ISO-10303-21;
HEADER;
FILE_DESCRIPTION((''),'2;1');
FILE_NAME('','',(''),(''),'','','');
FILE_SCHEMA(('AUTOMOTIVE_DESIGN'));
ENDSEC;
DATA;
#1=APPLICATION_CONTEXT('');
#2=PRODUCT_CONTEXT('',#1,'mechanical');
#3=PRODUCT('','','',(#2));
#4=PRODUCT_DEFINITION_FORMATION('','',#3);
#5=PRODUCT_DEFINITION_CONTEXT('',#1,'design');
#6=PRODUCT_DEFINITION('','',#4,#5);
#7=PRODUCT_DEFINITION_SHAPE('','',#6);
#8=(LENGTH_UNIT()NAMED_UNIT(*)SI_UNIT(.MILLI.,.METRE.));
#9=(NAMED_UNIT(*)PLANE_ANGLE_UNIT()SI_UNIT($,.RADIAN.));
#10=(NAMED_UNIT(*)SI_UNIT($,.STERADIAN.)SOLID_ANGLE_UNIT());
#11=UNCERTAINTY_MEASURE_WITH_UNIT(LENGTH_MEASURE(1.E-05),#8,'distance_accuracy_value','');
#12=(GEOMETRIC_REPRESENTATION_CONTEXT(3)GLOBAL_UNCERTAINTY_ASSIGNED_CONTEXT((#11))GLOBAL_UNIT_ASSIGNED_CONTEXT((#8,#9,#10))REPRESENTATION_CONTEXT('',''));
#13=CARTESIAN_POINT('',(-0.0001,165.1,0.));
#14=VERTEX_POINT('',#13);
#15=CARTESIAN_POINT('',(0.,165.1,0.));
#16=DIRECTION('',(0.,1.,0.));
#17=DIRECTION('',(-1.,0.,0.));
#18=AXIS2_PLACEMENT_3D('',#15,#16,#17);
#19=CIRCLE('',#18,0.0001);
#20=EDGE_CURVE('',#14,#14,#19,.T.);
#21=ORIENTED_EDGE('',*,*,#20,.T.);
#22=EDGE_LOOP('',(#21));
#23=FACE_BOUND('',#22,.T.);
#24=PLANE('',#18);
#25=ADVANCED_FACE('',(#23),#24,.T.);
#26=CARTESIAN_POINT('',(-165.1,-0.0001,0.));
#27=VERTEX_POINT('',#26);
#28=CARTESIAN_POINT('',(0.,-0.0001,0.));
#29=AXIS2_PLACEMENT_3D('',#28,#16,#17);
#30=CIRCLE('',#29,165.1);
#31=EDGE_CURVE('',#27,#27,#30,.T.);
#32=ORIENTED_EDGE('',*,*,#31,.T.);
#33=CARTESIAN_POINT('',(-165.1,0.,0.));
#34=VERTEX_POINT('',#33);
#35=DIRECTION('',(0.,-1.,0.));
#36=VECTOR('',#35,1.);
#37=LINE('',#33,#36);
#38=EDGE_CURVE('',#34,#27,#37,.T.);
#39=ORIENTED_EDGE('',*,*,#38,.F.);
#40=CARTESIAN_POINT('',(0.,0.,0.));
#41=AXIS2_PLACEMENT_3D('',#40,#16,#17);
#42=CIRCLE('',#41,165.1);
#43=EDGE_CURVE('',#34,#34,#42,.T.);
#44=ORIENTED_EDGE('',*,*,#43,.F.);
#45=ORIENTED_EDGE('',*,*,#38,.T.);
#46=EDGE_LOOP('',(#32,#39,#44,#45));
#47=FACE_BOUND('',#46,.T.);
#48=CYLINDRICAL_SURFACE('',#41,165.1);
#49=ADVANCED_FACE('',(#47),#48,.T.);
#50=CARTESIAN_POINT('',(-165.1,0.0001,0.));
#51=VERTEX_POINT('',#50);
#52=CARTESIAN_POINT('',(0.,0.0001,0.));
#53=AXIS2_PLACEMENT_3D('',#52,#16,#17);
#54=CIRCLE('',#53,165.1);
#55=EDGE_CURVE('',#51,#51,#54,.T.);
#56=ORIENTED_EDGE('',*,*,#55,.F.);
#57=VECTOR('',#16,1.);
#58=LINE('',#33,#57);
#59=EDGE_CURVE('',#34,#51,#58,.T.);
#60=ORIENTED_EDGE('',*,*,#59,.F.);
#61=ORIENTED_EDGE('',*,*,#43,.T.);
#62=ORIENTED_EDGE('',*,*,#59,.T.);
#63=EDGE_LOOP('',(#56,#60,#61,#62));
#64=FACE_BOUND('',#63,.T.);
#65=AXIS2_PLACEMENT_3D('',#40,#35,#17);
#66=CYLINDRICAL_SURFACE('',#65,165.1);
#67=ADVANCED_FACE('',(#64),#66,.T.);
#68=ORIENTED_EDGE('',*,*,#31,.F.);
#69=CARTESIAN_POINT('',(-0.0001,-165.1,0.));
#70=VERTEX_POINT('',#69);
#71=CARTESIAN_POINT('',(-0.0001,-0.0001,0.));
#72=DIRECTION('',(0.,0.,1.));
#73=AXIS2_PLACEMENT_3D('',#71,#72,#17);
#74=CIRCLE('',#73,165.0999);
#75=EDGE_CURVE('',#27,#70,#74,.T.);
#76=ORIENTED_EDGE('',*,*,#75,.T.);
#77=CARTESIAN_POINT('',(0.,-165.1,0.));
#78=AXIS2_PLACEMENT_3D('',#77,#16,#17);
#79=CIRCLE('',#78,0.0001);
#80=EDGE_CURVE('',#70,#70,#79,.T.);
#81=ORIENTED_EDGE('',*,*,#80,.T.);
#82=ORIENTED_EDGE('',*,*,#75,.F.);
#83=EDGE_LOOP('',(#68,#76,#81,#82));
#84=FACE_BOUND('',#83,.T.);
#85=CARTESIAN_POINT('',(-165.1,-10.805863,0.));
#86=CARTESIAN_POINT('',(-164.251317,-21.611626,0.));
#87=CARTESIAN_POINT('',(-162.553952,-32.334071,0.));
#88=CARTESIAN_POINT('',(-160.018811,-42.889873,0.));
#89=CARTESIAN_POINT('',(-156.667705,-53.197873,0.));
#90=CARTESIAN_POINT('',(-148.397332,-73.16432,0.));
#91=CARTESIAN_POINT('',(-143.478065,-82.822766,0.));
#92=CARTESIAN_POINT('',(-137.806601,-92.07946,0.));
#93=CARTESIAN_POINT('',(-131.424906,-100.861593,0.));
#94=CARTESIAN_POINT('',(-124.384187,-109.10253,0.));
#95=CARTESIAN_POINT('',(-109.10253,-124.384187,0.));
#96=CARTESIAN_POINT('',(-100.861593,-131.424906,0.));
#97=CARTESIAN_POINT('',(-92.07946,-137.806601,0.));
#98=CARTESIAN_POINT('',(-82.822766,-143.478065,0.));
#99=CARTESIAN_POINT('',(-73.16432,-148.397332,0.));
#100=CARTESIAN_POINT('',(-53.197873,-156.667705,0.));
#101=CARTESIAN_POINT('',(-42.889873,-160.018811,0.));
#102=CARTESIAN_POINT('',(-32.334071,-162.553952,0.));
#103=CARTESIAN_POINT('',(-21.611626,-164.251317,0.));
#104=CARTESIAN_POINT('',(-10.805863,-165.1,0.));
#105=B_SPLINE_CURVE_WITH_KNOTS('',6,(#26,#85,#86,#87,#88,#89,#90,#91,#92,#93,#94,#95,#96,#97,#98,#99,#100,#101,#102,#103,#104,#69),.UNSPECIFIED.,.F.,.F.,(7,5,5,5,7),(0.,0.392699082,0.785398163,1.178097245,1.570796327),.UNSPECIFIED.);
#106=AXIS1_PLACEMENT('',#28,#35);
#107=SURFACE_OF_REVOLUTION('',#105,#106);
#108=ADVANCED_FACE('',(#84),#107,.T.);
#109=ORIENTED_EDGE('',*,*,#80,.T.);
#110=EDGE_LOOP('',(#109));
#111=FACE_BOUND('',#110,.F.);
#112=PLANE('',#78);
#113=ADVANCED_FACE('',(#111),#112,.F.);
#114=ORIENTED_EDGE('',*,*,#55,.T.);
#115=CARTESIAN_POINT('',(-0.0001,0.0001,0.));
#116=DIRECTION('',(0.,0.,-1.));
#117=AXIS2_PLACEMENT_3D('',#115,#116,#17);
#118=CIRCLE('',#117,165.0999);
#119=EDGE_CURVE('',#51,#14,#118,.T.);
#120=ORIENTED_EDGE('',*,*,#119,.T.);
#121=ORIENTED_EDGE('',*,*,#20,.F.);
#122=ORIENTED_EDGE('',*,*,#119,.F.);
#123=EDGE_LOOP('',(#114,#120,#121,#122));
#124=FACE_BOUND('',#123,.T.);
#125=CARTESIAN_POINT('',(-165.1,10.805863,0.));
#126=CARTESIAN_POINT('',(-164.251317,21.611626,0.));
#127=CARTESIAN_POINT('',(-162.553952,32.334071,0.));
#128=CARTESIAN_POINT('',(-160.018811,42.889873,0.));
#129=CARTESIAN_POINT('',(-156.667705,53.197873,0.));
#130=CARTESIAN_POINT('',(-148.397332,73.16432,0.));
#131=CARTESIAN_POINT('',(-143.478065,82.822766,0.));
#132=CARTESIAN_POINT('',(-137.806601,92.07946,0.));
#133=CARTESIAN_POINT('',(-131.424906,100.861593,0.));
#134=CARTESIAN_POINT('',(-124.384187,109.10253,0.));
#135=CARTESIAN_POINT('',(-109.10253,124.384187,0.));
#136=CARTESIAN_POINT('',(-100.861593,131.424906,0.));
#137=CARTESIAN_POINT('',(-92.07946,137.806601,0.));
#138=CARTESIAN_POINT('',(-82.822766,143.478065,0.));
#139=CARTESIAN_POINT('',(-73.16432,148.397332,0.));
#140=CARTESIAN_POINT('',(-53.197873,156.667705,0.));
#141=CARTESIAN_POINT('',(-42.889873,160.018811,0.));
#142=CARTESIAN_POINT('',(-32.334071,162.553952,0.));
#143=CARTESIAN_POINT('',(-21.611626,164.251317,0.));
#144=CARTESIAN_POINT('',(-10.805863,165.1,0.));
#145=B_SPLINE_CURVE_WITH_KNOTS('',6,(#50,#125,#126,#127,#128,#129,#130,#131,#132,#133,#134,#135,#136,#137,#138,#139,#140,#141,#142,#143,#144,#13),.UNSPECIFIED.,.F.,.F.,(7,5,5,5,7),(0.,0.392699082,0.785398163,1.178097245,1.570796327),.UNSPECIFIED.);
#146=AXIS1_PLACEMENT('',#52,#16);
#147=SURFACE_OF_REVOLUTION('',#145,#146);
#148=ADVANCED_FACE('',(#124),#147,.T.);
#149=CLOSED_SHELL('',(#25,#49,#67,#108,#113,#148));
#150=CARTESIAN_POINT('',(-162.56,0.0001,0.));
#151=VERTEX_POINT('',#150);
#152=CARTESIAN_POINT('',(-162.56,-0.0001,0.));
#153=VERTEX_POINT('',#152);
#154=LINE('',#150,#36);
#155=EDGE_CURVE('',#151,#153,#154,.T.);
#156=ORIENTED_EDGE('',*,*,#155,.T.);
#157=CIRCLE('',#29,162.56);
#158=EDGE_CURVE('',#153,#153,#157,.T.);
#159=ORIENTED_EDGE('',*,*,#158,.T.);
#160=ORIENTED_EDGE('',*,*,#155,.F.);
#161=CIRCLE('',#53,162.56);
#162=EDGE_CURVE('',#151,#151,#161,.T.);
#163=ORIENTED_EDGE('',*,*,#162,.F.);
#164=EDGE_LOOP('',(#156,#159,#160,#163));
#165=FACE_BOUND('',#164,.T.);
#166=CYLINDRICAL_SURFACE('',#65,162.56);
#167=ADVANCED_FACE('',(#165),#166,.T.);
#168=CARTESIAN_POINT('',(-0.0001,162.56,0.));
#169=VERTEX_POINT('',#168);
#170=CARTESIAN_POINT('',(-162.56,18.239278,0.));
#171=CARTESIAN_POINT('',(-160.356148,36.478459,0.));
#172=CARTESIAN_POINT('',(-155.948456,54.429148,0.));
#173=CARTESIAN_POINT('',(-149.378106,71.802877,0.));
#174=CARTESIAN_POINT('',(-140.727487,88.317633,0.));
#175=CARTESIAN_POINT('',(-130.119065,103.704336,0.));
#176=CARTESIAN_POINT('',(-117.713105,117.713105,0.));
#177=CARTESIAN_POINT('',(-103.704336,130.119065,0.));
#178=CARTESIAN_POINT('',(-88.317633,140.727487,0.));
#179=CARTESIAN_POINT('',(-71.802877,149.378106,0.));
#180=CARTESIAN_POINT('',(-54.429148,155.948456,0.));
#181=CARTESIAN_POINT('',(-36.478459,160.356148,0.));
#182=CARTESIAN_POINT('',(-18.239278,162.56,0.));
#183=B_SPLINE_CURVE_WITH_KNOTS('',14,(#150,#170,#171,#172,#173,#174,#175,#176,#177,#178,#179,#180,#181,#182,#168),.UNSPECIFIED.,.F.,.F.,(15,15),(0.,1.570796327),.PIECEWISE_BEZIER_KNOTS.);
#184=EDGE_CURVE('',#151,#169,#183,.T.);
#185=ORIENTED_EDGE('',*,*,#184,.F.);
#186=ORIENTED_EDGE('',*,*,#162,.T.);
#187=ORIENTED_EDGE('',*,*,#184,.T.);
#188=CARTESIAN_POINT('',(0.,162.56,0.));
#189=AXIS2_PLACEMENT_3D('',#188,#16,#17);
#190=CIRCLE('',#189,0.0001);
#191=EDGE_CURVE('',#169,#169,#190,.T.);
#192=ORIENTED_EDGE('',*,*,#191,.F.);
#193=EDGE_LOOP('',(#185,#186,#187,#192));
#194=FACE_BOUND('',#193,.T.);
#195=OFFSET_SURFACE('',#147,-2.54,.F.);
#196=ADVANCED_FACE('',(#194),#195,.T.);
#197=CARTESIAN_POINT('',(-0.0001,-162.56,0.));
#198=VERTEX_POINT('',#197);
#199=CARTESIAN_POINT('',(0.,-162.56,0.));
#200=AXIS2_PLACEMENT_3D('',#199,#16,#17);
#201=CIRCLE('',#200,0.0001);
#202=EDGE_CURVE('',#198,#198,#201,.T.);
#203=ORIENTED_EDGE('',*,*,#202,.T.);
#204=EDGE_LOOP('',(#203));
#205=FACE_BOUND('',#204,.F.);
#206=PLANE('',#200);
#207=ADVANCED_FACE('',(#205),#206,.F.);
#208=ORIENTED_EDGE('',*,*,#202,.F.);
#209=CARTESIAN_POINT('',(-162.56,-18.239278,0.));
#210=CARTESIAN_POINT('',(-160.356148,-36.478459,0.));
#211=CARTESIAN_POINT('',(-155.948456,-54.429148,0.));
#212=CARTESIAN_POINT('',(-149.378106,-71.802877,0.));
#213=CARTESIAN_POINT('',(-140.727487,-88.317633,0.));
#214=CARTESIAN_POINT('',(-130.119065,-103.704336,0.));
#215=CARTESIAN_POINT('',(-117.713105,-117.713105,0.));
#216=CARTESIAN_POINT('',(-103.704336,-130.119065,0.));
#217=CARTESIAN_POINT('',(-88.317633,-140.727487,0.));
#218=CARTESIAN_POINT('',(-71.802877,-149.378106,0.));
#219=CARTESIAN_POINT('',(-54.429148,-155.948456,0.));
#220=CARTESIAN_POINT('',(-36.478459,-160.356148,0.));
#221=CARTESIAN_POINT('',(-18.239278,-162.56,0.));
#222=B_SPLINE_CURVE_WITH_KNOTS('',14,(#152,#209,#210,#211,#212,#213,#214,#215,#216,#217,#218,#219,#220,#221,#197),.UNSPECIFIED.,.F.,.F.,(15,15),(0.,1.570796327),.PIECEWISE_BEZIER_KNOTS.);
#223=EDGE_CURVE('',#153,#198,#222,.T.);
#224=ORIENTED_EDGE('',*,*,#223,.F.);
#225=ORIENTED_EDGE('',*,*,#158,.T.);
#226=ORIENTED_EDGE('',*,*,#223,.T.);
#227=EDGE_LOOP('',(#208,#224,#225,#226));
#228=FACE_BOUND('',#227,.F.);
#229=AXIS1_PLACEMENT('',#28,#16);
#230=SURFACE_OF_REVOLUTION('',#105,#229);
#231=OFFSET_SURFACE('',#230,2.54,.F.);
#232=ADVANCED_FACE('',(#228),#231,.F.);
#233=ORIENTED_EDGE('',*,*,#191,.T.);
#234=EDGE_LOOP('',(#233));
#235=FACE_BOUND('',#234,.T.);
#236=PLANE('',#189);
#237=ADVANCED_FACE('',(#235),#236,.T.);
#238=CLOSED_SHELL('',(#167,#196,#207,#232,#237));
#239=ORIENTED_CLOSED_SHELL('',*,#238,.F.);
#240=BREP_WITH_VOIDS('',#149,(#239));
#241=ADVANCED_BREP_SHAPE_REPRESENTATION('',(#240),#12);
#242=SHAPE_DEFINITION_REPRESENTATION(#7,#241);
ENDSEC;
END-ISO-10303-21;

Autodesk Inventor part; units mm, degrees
ref_plane "YZ Plane" through (0, 0, 0) normal (1, 0, 0) x (0, 1, 0)
ref_plane "XZ Plane" through (0, 0, 0) normal (0, 1, 0) x (-1, 0, 0)
ref_plane "XY Plane" through (0, 0, 0) normal (0, 0, 1) x (1, 0, 0)
sketch "Sketch1" plane through (0, 0, 0) normal (0, 1, 0) x (-1, 0, 0)
  circle A0 centre (0, 0) radius 165.1
  dimension "d0" = 330.2
extrude "Extrusion1" add sketch "Sketch1" along normal mid plane 330.2
fillet "Fillet1" radius 165.1 2 edges at (165.1, 165.1, 0) (165.1, -165.1, 0)
shell "Shell1" thickness 2.54 removed faces 0
properties part number "Ball" material "Rubber"
